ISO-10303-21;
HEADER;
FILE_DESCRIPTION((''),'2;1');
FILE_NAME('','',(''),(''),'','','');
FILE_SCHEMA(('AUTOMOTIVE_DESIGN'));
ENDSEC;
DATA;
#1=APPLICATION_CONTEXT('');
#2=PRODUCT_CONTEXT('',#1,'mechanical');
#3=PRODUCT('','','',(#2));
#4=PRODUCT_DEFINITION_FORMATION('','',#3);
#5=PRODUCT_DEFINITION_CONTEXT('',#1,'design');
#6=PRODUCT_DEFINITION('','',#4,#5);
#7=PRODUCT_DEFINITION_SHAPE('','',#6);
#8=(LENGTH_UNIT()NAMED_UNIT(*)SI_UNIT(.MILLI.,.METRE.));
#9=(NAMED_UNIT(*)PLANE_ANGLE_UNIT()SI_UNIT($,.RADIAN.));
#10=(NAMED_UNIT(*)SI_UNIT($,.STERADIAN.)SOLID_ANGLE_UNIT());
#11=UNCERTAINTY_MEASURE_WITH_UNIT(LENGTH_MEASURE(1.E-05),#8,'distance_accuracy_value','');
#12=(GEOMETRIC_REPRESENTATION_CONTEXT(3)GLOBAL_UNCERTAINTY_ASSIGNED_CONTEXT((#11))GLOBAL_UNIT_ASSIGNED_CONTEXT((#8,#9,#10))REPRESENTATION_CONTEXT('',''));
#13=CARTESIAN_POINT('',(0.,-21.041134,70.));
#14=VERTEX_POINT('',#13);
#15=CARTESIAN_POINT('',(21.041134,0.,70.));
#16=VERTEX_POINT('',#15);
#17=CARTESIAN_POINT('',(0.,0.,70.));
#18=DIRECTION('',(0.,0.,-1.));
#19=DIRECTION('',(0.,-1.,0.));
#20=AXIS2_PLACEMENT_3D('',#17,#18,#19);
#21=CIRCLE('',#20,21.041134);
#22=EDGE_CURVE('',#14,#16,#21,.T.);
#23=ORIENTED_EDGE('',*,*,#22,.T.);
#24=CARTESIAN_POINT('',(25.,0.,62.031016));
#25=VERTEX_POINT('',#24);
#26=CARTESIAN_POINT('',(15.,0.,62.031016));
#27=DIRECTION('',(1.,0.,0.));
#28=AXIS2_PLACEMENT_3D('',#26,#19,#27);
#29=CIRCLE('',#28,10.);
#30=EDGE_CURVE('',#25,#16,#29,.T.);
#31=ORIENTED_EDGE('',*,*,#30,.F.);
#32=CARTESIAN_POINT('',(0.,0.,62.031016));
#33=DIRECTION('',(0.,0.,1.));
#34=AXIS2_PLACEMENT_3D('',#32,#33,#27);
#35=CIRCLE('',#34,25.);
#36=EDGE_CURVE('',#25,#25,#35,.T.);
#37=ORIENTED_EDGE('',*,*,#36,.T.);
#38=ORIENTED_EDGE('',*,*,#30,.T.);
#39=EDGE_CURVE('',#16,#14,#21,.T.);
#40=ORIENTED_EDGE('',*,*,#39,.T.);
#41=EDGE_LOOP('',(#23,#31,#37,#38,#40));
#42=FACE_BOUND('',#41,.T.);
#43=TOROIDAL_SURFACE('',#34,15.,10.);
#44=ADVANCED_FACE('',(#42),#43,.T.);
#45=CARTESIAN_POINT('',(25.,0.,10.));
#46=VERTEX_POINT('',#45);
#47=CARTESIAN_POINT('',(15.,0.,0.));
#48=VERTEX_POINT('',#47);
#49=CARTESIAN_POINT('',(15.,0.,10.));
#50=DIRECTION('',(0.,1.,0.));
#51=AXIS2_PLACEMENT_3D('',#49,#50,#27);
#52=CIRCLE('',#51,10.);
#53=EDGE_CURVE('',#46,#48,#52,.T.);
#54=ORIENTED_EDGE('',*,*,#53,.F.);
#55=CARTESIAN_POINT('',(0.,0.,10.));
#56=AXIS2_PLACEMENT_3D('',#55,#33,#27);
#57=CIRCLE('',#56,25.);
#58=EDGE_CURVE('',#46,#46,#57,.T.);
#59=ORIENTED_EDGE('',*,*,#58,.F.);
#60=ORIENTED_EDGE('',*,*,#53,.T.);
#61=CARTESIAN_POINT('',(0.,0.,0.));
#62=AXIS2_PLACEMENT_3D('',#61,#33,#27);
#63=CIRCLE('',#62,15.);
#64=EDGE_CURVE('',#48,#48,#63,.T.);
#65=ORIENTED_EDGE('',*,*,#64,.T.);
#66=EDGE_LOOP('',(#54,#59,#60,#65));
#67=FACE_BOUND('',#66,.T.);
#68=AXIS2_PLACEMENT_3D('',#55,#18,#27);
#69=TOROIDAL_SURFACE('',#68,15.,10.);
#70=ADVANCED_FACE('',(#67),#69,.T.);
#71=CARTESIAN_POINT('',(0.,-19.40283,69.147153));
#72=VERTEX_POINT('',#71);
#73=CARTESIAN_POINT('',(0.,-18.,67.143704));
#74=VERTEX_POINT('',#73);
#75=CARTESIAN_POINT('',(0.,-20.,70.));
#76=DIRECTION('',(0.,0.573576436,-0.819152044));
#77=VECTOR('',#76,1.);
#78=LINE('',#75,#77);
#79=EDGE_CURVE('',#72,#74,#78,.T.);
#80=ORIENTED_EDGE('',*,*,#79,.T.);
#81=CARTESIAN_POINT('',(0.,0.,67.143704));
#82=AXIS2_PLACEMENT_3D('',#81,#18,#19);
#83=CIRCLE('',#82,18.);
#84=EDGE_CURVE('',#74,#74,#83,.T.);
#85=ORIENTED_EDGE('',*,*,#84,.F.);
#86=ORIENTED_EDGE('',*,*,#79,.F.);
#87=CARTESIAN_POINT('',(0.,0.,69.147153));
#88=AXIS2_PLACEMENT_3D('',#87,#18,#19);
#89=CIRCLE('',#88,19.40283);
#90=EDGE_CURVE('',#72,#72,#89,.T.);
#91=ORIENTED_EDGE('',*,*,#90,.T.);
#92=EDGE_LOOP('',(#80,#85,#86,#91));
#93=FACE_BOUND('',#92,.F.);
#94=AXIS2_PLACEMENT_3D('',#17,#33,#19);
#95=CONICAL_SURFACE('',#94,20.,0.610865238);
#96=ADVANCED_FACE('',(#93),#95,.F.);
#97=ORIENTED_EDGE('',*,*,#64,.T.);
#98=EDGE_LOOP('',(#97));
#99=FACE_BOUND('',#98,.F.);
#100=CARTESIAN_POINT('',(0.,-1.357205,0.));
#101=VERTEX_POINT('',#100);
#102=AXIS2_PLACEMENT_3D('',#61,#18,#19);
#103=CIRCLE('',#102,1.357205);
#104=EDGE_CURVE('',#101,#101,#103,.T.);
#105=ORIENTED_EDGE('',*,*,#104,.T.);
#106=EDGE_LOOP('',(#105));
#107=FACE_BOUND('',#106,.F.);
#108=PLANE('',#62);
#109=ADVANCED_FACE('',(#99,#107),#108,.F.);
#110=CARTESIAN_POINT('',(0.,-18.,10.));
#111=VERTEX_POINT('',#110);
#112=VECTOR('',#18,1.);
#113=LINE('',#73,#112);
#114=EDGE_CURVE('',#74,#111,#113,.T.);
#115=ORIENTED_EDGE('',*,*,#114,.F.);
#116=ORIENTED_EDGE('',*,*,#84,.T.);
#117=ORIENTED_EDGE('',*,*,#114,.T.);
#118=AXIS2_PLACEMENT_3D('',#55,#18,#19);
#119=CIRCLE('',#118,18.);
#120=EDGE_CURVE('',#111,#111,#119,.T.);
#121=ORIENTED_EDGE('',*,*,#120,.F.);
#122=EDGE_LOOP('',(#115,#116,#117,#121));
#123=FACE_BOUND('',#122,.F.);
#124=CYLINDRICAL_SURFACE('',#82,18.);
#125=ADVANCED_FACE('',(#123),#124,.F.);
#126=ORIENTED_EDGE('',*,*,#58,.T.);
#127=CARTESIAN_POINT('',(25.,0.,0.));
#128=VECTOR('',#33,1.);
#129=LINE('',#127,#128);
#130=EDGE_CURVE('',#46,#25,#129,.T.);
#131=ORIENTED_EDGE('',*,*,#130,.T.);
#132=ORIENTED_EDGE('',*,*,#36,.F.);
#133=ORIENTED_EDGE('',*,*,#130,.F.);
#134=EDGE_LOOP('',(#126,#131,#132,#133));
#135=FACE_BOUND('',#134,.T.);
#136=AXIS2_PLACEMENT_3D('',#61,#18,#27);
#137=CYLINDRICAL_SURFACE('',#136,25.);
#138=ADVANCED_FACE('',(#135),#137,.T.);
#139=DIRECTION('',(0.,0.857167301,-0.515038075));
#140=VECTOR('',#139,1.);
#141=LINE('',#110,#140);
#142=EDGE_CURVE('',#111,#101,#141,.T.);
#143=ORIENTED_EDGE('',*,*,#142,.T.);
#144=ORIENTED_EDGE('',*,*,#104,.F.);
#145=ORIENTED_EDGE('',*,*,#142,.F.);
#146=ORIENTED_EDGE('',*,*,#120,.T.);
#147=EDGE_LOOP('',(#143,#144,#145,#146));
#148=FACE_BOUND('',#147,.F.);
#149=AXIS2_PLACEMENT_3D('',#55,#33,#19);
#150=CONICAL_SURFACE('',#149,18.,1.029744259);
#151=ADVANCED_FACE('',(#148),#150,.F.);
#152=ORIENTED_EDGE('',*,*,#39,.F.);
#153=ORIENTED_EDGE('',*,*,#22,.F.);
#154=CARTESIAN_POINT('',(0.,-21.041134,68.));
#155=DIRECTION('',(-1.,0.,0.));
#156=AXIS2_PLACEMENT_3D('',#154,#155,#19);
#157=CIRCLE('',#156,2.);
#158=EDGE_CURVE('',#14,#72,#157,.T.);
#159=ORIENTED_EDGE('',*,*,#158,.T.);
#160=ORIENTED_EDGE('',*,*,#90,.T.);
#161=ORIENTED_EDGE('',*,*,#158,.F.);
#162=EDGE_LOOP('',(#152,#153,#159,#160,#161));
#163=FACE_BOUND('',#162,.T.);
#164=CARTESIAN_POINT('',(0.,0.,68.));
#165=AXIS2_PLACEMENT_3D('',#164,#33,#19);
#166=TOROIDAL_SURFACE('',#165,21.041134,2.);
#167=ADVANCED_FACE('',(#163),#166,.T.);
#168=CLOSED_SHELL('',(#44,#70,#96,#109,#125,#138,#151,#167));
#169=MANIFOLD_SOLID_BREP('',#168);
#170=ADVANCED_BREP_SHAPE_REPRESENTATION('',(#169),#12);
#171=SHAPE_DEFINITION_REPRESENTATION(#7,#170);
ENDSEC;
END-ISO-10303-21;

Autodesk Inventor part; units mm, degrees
ref_plane "YZ Plane" through (0, 0, 0) normal (1, 0, 0) x (0, 1, 0)
ref_plane "XZ Plane" through (0, 0, 0) normal (0, 1, 0) x (-1, 0, 0)
ref_plane "XY Plane" through (0, 0, 0) normal (0, 0, 1) x (1, 0, 0)
sketch "Sketch1" plane through (0, 0, 0) normal (0, 0, 1) x (1, 0, 0)
  circle A0 centre (0, 0) radius 25
  dimension "d0" = 50
extrude "Extrusion1" add sketch "Sketch1" along normal blind 70
hole "Hole1" at (0, 0, 70) direction (0, 0, -1) diameter 36 depth 60 tip angle 118 countersink diameter 40 countersink angle 70
fillet "Fillet1" radius 2 1 edges at (0, 20, 70)
sketch "Sketch2" plane through (0, 0, 70) normal (0, 0, 1) x (1, 0, 0)
  point P0 (0, 0)
fillet "Fillet2" radius 10 1 edges at (-25, 0, 0)
fillet "Fillet3" radius 10 1 edges at (-25, 0, 70)
sketch3d "3D Sketch2"
properties part number "solenoid_looking_pot"
